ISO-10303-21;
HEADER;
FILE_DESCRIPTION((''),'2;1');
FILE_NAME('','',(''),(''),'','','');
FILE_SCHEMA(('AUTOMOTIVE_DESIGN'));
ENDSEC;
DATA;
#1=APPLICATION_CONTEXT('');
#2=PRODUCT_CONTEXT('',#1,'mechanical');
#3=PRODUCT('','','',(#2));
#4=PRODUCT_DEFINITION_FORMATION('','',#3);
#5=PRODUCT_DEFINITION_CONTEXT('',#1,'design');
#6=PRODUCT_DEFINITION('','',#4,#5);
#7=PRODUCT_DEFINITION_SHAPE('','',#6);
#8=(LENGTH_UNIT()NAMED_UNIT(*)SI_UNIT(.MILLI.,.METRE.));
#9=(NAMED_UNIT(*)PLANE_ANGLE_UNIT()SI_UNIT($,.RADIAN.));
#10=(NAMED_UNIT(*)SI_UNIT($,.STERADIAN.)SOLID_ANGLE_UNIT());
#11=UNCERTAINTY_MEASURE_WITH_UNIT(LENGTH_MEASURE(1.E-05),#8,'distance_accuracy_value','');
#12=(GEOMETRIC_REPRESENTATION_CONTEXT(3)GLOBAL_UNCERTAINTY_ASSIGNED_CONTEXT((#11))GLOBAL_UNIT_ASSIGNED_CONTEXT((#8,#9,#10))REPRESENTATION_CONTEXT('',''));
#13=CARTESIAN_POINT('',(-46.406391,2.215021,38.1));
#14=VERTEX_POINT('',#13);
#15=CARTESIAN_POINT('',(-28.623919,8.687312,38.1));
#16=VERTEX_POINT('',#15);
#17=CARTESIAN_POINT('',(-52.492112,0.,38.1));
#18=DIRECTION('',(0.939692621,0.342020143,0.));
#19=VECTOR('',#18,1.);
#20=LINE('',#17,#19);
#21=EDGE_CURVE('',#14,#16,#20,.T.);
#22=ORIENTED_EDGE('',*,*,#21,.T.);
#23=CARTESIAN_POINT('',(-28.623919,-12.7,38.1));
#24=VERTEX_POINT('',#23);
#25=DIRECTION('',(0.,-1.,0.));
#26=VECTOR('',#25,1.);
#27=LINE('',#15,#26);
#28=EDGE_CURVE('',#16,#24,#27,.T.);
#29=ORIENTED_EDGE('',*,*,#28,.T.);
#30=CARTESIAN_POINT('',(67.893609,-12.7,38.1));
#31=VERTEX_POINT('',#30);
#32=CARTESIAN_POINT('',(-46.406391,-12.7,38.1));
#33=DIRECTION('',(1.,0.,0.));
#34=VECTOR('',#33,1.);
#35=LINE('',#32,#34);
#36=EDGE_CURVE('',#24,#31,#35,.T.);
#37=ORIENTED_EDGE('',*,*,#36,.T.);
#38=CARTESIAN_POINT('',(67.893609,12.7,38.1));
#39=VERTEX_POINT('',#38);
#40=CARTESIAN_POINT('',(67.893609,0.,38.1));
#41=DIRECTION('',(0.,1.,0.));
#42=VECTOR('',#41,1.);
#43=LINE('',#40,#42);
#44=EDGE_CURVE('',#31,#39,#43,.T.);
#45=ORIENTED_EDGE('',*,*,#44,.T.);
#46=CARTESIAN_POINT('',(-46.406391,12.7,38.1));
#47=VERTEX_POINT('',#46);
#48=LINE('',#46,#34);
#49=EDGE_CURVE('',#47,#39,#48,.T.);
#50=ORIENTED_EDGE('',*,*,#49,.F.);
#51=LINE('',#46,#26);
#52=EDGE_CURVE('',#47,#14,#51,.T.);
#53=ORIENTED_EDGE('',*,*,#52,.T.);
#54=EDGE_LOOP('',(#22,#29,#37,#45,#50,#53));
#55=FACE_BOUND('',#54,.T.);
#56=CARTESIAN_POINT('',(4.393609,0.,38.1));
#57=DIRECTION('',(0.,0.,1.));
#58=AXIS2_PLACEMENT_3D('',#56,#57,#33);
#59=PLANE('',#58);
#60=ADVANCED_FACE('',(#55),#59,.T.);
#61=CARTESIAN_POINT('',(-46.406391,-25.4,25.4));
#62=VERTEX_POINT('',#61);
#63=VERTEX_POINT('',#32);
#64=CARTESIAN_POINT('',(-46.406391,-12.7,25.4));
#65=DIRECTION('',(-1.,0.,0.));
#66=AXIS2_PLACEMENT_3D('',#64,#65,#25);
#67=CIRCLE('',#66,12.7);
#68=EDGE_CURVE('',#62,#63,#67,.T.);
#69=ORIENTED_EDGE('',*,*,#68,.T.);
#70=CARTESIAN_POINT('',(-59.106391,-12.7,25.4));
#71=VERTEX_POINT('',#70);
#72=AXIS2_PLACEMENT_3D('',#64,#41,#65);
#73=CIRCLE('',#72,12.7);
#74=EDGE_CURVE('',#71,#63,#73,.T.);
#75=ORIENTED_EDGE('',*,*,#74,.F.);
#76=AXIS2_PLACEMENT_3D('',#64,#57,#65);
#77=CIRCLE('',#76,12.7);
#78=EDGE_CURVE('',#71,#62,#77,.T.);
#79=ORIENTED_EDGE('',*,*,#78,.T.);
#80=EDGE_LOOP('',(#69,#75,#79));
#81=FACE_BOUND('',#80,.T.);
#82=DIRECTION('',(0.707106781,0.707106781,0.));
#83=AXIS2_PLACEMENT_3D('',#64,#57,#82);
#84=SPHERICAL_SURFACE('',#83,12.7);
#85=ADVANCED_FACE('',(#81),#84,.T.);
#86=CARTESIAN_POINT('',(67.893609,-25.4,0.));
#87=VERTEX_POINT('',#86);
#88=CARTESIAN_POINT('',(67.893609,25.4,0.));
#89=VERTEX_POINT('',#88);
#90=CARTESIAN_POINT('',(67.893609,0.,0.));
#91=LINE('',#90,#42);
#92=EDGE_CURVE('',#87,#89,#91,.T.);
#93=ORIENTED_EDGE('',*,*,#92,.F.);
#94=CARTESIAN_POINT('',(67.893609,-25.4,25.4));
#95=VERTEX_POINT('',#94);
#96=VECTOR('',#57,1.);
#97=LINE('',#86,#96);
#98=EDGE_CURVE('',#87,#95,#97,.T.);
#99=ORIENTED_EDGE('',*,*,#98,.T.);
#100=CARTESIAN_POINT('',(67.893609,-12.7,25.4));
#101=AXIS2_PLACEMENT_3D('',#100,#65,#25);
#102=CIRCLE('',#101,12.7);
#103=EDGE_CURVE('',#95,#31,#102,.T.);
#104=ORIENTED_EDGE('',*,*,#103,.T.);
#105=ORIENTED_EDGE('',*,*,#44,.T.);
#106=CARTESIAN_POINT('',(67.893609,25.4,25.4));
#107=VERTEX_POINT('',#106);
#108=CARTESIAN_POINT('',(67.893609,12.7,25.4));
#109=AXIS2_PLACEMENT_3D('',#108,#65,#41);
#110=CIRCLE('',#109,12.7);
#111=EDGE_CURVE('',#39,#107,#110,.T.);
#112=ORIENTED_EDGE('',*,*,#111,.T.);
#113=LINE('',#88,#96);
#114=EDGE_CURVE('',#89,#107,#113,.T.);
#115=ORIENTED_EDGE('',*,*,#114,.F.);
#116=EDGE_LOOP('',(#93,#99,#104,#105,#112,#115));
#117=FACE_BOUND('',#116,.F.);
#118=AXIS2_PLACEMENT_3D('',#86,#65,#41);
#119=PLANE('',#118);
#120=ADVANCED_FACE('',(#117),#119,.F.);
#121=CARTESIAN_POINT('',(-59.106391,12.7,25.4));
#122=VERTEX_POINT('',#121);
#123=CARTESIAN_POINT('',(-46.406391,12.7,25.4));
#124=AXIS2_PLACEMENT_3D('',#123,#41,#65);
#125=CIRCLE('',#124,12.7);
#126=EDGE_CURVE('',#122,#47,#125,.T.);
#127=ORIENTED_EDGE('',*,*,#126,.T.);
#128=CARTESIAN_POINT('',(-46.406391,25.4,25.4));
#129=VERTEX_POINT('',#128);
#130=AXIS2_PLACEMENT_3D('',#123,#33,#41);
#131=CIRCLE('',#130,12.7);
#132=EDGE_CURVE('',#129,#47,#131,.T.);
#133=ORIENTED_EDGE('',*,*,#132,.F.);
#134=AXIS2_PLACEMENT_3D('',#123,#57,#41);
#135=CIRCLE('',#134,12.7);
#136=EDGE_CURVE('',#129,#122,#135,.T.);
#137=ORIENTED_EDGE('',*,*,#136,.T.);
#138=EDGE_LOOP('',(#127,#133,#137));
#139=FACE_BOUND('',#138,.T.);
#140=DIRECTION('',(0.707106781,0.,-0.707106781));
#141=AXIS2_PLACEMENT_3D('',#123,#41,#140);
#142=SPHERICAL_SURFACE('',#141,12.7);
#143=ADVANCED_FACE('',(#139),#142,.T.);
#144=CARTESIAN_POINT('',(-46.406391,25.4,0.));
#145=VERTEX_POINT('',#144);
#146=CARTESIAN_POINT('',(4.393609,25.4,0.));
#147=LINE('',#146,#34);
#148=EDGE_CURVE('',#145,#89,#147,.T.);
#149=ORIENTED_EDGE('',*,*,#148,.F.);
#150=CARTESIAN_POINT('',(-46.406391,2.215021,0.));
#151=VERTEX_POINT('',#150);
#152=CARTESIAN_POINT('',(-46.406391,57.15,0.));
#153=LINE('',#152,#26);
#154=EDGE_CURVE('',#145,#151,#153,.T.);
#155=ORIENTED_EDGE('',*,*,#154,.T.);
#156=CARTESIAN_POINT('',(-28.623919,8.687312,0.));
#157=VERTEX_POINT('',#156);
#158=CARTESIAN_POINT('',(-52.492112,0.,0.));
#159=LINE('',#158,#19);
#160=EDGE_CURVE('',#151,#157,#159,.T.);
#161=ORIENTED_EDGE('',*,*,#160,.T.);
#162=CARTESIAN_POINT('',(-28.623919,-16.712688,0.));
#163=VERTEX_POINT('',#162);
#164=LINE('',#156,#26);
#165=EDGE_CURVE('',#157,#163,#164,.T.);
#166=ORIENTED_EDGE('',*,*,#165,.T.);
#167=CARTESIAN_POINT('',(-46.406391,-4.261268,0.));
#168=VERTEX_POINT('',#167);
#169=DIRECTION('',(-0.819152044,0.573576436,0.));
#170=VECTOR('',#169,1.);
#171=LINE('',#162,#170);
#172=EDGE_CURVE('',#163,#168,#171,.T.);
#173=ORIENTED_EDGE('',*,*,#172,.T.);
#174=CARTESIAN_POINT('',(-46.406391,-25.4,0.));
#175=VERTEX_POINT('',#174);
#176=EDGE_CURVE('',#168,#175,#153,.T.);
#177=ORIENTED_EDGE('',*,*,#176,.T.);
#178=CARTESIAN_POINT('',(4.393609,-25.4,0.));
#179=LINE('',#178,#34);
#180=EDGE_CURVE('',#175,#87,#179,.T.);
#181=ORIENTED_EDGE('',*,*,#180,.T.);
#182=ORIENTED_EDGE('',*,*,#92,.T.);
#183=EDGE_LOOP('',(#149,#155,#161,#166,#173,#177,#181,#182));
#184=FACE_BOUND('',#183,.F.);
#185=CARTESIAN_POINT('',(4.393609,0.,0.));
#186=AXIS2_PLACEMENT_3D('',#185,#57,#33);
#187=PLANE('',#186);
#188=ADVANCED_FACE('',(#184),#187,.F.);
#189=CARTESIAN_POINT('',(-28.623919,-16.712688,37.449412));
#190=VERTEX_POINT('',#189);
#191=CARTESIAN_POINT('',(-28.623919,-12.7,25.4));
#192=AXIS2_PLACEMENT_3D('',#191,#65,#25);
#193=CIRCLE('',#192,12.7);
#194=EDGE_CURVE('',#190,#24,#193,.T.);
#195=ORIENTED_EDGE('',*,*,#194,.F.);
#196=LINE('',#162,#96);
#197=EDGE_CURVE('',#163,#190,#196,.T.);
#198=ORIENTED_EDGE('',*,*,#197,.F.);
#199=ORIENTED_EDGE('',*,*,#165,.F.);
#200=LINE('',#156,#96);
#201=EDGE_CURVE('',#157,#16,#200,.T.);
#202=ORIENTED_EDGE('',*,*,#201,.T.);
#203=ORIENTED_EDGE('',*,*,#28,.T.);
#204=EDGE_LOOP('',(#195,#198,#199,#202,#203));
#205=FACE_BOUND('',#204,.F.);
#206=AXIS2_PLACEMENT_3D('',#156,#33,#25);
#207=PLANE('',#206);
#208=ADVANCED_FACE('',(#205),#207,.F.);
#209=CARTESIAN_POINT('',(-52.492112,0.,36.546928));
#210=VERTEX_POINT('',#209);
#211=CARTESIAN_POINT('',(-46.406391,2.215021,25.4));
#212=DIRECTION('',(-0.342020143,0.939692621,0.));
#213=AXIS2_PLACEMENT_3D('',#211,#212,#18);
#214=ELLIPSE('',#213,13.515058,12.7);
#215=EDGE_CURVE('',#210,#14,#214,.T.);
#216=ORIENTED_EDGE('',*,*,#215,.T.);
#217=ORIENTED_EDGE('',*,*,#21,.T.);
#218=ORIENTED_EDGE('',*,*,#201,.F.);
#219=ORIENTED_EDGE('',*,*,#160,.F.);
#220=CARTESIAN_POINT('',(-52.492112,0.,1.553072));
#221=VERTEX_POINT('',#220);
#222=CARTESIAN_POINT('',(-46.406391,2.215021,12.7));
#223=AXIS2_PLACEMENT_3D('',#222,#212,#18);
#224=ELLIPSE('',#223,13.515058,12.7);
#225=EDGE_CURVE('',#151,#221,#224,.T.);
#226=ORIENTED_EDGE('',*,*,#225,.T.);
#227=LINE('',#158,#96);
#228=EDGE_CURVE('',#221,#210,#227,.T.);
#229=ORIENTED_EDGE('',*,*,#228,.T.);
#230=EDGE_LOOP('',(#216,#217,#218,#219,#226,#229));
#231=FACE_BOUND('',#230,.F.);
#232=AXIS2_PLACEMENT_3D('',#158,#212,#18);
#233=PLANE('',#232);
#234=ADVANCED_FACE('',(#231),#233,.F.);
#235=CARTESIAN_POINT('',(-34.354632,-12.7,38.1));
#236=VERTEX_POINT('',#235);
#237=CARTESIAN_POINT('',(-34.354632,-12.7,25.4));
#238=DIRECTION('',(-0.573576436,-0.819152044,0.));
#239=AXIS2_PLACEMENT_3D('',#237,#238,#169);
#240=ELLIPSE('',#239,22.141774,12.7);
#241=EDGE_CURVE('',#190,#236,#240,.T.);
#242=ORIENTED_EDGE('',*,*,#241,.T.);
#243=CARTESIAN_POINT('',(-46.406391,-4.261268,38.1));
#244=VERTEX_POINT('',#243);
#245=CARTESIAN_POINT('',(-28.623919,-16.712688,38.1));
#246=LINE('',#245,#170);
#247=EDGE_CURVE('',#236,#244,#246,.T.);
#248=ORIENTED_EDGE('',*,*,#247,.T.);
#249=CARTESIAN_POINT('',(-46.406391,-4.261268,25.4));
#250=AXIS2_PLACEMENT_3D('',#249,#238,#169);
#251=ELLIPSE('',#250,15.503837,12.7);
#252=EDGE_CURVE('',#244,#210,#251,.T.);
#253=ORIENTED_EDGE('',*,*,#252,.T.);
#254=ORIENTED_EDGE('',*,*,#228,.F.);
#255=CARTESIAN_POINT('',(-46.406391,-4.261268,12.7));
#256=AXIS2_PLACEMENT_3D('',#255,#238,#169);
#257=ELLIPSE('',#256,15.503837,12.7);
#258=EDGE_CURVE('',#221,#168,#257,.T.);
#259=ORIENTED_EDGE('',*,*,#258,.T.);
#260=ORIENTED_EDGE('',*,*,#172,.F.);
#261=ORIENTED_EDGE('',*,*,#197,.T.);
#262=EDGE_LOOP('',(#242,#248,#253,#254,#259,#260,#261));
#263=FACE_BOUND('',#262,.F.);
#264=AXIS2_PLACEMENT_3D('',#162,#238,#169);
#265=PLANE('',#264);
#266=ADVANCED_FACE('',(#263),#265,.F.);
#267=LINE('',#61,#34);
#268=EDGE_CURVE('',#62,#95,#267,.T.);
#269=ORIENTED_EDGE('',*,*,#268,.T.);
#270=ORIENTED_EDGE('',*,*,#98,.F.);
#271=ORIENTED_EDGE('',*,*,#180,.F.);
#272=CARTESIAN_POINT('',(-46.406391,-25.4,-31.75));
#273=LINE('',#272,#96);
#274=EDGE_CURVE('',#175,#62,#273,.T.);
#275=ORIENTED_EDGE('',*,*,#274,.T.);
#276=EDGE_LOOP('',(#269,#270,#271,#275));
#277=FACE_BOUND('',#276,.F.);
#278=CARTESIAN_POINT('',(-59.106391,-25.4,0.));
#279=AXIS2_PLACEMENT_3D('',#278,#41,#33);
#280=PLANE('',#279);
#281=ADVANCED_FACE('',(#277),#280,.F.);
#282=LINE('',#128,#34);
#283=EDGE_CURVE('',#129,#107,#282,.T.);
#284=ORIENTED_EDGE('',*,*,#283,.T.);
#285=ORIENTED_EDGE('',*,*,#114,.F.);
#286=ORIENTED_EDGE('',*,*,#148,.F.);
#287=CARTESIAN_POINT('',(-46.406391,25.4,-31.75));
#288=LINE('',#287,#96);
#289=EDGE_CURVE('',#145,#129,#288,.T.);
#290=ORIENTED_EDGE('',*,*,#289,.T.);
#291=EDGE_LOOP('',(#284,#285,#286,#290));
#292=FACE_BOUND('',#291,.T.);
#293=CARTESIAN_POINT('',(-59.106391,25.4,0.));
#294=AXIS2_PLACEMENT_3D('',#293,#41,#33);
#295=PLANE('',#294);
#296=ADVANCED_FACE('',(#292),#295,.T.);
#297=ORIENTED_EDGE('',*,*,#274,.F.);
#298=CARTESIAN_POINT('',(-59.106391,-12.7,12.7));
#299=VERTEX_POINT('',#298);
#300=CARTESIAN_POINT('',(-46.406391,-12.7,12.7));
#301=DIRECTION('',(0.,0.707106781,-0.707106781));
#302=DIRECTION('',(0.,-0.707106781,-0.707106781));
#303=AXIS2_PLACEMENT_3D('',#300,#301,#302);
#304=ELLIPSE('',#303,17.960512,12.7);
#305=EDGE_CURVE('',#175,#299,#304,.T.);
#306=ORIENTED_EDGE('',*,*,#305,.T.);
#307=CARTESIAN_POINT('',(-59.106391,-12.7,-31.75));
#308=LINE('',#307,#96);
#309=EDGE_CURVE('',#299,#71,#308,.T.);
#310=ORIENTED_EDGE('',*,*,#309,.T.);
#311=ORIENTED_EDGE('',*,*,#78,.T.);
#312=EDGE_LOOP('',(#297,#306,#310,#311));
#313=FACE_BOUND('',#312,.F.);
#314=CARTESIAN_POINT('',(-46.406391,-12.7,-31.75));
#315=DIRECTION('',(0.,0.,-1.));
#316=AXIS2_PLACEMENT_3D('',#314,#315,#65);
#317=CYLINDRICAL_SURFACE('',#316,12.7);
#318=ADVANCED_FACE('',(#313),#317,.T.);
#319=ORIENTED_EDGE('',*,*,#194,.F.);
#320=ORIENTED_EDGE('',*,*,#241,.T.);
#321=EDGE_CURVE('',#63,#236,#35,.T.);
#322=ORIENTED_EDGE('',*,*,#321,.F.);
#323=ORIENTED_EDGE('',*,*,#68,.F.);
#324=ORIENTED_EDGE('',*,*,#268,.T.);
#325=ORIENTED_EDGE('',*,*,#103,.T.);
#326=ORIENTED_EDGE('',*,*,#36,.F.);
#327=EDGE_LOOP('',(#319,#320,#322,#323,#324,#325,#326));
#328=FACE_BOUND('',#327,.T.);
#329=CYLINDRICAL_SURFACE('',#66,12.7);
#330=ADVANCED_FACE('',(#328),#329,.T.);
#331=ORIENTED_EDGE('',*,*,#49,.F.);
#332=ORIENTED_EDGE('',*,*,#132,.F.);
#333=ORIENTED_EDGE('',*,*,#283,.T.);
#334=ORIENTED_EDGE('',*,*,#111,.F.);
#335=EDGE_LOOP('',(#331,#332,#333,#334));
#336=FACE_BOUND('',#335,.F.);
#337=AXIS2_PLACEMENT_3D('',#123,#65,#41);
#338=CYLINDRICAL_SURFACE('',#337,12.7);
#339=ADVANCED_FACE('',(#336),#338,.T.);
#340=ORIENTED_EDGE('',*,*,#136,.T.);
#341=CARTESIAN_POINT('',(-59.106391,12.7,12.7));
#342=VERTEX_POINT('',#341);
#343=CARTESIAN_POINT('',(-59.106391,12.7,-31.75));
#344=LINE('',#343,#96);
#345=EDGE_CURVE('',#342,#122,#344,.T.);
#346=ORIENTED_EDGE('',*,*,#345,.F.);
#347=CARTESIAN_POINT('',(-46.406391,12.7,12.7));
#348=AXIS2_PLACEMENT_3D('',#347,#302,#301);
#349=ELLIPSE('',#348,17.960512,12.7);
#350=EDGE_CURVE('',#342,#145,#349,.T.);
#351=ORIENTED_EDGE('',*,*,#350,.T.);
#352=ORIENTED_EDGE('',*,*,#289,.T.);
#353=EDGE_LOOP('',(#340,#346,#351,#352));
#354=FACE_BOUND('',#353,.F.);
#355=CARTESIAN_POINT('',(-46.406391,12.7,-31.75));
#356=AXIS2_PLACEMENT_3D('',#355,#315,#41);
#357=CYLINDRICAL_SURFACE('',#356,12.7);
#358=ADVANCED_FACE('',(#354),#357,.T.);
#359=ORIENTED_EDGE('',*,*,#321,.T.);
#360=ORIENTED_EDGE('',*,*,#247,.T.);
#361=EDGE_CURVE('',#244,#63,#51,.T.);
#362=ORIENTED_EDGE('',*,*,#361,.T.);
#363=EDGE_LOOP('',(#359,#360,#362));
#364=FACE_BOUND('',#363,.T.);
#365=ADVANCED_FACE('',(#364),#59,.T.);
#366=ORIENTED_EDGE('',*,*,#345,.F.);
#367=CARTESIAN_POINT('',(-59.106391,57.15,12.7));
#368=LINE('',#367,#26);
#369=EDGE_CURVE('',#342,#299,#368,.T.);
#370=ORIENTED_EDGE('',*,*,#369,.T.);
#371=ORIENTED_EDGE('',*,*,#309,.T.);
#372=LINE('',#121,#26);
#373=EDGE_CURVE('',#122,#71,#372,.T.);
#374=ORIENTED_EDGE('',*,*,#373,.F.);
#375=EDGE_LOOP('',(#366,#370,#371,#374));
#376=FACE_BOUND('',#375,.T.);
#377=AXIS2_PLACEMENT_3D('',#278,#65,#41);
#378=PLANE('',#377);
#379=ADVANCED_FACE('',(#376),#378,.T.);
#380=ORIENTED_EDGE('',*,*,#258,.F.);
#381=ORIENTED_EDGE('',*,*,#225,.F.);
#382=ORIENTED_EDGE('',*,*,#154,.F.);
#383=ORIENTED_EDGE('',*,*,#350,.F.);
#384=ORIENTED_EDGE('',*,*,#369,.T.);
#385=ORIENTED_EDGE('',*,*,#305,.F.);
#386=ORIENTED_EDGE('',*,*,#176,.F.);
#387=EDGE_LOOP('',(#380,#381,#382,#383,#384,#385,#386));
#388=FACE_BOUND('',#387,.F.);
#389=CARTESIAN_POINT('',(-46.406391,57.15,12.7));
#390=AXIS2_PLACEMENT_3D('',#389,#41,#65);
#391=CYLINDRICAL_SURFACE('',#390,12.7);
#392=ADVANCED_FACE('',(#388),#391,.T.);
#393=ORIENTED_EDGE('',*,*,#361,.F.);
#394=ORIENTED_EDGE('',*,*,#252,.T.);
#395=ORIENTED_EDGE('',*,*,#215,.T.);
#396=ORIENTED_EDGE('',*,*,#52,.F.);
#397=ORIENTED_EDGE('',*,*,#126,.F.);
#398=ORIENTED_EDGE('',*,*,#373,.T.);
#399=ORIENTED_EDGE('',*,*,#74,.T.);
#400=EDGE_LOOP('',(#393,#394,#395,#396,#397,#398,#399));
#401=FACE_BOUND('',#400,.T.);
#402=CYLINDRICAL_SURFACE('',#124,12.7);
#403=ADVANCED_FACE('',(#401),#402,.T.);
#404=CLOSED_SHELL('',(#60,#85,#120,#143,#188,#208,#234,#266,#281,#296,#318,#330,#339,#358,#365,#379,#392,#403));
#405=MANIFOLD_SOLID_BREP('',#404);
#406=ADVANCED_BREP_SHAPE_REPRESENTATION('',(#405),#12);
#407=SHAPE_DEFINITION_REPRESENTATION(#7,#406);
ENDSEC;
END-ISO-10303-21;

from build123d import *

# Parameters (mm, degrees)
F0_W         = 127
F0_H         = 50.8
F1_DEPTH     = 38.1
F2_T1_DEPTH  = 57.15
F2_T3_DEPTH  = 114.3
F2_T5_DEPTH  = 25.4
F2_T7_DEPTH  = 146.05
F2_S11_W     = 12.7
F2_S11_H     = 12.7
F2_T12_DEPTH = 12.7
F2_S17_W     = 12.7
F2_S17_H     = 12.7
F2_T18_DEPTH = 12.7


# Not quite as in the source:
# - a fillet or chamfer that OpenCascade refuses, or shapes differently, is made with other operations: its cross-section is extruded or revolved along the edge and cut away or added


with BuildPart() as f1:
    # F0 (on Top) → F1 (new body)
    with BuildSketch(Plane.XY):
        with Locations((4.3936092407, 0)):
            Rectangle(F0_W, F0_H)
        Polygon((-28.6239193533, -16.7126883595), (-52.4921119213, 0), (-28.6239193533, 8.6873116405), align=None, mode=Mode.SUBTRACT)
    extrude(amount=F1_DEPTH)

    # F2: fillet of radius 12.7 on 6 edges, made by hand

    # F2_s2 → F2_t1 (cut)
    with BuildSketch(Plane.XY.offset(-31.75)):
        with BuildLine():
            ThreePointArc((-46.4063907593, 25.4), (-55.3866468804, 21.6802561211), (-59.1063907593, 12.7))
            Line((-59.1063907593, 12.7), (-59.1063907593, 25.4))
            Line((-59.1063907593, 25.4), (-46.4063907593, 25.4))
        make_face()
        with BuildLine():
            ThreePointArc((-59.1063907593, -12.7), (-55.3866468804, -21.6802561211), (-46.4063907593, -25.4))
            Line((-46.4063907593, -25.4), (-59.1063907593, -25.4))
            Line((-59.1063907593, -25.4), (-59.1063907593, -12.7))
        make_face()
    extrude(amount=F2_T1_DEPTH, mode=Mode.SUBTRACT)

    # F2_s4 → F2_t3 (cut)
    with BuildSketch(Plane.XZ.offset(-57.15)):
        with BuildLine():
            ThreePointArc((-59.1063907593, 12.7), (-55.3866468804, 3.7197438789), (-46.4063907593, 0))
            Line((-46.4063907593, 0), (-59.1063907593, 0))
            Line((-59.1063907593, 0), (-59.1063907593, 12.7))
        make_face()
    extrude(amount=F2_T3_DEPTH, mode=Mode.SUBTRACT)

    # F2_s6 → F2_t5 (cut)
    with BuildSketch(Plane.XZ.offset(-12.7)):
        with BuildLine():
            ThreePointArc((-59.1063907593, 25.4), (-55.3866468804, 34.3802561211), (-46.4063907593, 38.1))
            Line((-46.4063907593, 38.1), (-59.1063907593, 38.1))
            Line((-59.1063907593, 38.1), (-59.1063907593, 25.4))
        make_face()
    extrude(amount=F2_T5_DEPTH, mode=Mode.SUBTRACT)

    # F2_s8 → F2_t7 (cut)
    with BuildSketch(Plane.YZ.offset(-46.4063907593)):
        with BuildLine():
            ThreePointArc((-25.4, 25.4), (-21.6802561211, 34.3802561211), (-12.7, 38.1))
            Line((-12.7, 38.1), (-25.4, 38.1))
            Line((-25.4, 38.1), (-25.4, 25.4))
        make_face()
        with BuildLine():
            ThreePointArc((25.4, 25.4), (21.6802561211, 34.3802561211), (12.7, 38.1))
            Line((12.7, 38.1), (25.4, 38.1))
            Line((25.4, 38.1), (25.4, 25.4))
        make_face()
    extrude(amount=F2_T7_DEPTH, mode=Mode.SUBTRACT)


with BuildPart() as f2_tool10:
    # F2_s11 → F2_t12 (new body)
    with BuildSketch(Plane.XZ.offset(-12.7)):
        with Locations((-52.7563907593, 31.75)):
            Rectangle(F2_S11_W, F2_S11_H)
    extrude(amount=-F2_T12_DEPTH)

    # F2_s13 → F2_t14 (revolve, cut)
    with BuildSketch(Plane(origin=(-46.4063907593, 12.7, 25.4), x_dir=(0.7071067812, 0, -0.7071067812), z_dir=(0.7071067812, 0, 0.7071067812))):
        with BuildLine():
            ThreePointArc((0, -12.7), (12.7, 0), (0, 12.7))
            Line((0, 12.7), (0, -12.7))
        make_face()
    revolve(axis=Axis((-46.4063907593, 12.7, 25.4), (0, 1, 0)), mode=Mode.SUBTRACT)


with BuildPart() as f1_1:
    add(f1.part)

    # F2_t9: cut F2_tool10
    add(f2_tool10.part, mode=Mode.SUBTRACT)


with BuildPart() as f2_tool16:
    # F2_s17 → F2_t18 (new body)
    with BuildSketch(Plane.XY.offset(25.4)):
        with Locations((-52.7563907593, -19.05)):
            Rectangle(F2_S17_W, F2_S17_H)
    extrude(amount=F2_T18_DEPTH)

    # F2_s19 → F2_t20 (revolve, cut)
    with BuildSketch(Plane(origin=(-46.4063907593, -12.7, 25.4), x_dir=(0.7071067812, 0.7071067812, 0), z_dir=(0.7071067812, -0.7071067812, 0))):
        with BuildLine():
            ThreePointArc((0, -12.7), (12.7, 0), (0, 12.7))
            Line((0, 12.7), (0, -12.7))
        make_face()
    revolve(axis=Axis((-46.4063907593, -12.7, 25.4), (0, 0, 1)), mode=Mode.SUBTRACT)


with BuildPart() as f1_2:
    add(f1_1.part)

    # F2_t15: cut F2_tool16
    add(f2_tool16.part, mode=Mode.SUBTRACT)


solid = f1_2.part
